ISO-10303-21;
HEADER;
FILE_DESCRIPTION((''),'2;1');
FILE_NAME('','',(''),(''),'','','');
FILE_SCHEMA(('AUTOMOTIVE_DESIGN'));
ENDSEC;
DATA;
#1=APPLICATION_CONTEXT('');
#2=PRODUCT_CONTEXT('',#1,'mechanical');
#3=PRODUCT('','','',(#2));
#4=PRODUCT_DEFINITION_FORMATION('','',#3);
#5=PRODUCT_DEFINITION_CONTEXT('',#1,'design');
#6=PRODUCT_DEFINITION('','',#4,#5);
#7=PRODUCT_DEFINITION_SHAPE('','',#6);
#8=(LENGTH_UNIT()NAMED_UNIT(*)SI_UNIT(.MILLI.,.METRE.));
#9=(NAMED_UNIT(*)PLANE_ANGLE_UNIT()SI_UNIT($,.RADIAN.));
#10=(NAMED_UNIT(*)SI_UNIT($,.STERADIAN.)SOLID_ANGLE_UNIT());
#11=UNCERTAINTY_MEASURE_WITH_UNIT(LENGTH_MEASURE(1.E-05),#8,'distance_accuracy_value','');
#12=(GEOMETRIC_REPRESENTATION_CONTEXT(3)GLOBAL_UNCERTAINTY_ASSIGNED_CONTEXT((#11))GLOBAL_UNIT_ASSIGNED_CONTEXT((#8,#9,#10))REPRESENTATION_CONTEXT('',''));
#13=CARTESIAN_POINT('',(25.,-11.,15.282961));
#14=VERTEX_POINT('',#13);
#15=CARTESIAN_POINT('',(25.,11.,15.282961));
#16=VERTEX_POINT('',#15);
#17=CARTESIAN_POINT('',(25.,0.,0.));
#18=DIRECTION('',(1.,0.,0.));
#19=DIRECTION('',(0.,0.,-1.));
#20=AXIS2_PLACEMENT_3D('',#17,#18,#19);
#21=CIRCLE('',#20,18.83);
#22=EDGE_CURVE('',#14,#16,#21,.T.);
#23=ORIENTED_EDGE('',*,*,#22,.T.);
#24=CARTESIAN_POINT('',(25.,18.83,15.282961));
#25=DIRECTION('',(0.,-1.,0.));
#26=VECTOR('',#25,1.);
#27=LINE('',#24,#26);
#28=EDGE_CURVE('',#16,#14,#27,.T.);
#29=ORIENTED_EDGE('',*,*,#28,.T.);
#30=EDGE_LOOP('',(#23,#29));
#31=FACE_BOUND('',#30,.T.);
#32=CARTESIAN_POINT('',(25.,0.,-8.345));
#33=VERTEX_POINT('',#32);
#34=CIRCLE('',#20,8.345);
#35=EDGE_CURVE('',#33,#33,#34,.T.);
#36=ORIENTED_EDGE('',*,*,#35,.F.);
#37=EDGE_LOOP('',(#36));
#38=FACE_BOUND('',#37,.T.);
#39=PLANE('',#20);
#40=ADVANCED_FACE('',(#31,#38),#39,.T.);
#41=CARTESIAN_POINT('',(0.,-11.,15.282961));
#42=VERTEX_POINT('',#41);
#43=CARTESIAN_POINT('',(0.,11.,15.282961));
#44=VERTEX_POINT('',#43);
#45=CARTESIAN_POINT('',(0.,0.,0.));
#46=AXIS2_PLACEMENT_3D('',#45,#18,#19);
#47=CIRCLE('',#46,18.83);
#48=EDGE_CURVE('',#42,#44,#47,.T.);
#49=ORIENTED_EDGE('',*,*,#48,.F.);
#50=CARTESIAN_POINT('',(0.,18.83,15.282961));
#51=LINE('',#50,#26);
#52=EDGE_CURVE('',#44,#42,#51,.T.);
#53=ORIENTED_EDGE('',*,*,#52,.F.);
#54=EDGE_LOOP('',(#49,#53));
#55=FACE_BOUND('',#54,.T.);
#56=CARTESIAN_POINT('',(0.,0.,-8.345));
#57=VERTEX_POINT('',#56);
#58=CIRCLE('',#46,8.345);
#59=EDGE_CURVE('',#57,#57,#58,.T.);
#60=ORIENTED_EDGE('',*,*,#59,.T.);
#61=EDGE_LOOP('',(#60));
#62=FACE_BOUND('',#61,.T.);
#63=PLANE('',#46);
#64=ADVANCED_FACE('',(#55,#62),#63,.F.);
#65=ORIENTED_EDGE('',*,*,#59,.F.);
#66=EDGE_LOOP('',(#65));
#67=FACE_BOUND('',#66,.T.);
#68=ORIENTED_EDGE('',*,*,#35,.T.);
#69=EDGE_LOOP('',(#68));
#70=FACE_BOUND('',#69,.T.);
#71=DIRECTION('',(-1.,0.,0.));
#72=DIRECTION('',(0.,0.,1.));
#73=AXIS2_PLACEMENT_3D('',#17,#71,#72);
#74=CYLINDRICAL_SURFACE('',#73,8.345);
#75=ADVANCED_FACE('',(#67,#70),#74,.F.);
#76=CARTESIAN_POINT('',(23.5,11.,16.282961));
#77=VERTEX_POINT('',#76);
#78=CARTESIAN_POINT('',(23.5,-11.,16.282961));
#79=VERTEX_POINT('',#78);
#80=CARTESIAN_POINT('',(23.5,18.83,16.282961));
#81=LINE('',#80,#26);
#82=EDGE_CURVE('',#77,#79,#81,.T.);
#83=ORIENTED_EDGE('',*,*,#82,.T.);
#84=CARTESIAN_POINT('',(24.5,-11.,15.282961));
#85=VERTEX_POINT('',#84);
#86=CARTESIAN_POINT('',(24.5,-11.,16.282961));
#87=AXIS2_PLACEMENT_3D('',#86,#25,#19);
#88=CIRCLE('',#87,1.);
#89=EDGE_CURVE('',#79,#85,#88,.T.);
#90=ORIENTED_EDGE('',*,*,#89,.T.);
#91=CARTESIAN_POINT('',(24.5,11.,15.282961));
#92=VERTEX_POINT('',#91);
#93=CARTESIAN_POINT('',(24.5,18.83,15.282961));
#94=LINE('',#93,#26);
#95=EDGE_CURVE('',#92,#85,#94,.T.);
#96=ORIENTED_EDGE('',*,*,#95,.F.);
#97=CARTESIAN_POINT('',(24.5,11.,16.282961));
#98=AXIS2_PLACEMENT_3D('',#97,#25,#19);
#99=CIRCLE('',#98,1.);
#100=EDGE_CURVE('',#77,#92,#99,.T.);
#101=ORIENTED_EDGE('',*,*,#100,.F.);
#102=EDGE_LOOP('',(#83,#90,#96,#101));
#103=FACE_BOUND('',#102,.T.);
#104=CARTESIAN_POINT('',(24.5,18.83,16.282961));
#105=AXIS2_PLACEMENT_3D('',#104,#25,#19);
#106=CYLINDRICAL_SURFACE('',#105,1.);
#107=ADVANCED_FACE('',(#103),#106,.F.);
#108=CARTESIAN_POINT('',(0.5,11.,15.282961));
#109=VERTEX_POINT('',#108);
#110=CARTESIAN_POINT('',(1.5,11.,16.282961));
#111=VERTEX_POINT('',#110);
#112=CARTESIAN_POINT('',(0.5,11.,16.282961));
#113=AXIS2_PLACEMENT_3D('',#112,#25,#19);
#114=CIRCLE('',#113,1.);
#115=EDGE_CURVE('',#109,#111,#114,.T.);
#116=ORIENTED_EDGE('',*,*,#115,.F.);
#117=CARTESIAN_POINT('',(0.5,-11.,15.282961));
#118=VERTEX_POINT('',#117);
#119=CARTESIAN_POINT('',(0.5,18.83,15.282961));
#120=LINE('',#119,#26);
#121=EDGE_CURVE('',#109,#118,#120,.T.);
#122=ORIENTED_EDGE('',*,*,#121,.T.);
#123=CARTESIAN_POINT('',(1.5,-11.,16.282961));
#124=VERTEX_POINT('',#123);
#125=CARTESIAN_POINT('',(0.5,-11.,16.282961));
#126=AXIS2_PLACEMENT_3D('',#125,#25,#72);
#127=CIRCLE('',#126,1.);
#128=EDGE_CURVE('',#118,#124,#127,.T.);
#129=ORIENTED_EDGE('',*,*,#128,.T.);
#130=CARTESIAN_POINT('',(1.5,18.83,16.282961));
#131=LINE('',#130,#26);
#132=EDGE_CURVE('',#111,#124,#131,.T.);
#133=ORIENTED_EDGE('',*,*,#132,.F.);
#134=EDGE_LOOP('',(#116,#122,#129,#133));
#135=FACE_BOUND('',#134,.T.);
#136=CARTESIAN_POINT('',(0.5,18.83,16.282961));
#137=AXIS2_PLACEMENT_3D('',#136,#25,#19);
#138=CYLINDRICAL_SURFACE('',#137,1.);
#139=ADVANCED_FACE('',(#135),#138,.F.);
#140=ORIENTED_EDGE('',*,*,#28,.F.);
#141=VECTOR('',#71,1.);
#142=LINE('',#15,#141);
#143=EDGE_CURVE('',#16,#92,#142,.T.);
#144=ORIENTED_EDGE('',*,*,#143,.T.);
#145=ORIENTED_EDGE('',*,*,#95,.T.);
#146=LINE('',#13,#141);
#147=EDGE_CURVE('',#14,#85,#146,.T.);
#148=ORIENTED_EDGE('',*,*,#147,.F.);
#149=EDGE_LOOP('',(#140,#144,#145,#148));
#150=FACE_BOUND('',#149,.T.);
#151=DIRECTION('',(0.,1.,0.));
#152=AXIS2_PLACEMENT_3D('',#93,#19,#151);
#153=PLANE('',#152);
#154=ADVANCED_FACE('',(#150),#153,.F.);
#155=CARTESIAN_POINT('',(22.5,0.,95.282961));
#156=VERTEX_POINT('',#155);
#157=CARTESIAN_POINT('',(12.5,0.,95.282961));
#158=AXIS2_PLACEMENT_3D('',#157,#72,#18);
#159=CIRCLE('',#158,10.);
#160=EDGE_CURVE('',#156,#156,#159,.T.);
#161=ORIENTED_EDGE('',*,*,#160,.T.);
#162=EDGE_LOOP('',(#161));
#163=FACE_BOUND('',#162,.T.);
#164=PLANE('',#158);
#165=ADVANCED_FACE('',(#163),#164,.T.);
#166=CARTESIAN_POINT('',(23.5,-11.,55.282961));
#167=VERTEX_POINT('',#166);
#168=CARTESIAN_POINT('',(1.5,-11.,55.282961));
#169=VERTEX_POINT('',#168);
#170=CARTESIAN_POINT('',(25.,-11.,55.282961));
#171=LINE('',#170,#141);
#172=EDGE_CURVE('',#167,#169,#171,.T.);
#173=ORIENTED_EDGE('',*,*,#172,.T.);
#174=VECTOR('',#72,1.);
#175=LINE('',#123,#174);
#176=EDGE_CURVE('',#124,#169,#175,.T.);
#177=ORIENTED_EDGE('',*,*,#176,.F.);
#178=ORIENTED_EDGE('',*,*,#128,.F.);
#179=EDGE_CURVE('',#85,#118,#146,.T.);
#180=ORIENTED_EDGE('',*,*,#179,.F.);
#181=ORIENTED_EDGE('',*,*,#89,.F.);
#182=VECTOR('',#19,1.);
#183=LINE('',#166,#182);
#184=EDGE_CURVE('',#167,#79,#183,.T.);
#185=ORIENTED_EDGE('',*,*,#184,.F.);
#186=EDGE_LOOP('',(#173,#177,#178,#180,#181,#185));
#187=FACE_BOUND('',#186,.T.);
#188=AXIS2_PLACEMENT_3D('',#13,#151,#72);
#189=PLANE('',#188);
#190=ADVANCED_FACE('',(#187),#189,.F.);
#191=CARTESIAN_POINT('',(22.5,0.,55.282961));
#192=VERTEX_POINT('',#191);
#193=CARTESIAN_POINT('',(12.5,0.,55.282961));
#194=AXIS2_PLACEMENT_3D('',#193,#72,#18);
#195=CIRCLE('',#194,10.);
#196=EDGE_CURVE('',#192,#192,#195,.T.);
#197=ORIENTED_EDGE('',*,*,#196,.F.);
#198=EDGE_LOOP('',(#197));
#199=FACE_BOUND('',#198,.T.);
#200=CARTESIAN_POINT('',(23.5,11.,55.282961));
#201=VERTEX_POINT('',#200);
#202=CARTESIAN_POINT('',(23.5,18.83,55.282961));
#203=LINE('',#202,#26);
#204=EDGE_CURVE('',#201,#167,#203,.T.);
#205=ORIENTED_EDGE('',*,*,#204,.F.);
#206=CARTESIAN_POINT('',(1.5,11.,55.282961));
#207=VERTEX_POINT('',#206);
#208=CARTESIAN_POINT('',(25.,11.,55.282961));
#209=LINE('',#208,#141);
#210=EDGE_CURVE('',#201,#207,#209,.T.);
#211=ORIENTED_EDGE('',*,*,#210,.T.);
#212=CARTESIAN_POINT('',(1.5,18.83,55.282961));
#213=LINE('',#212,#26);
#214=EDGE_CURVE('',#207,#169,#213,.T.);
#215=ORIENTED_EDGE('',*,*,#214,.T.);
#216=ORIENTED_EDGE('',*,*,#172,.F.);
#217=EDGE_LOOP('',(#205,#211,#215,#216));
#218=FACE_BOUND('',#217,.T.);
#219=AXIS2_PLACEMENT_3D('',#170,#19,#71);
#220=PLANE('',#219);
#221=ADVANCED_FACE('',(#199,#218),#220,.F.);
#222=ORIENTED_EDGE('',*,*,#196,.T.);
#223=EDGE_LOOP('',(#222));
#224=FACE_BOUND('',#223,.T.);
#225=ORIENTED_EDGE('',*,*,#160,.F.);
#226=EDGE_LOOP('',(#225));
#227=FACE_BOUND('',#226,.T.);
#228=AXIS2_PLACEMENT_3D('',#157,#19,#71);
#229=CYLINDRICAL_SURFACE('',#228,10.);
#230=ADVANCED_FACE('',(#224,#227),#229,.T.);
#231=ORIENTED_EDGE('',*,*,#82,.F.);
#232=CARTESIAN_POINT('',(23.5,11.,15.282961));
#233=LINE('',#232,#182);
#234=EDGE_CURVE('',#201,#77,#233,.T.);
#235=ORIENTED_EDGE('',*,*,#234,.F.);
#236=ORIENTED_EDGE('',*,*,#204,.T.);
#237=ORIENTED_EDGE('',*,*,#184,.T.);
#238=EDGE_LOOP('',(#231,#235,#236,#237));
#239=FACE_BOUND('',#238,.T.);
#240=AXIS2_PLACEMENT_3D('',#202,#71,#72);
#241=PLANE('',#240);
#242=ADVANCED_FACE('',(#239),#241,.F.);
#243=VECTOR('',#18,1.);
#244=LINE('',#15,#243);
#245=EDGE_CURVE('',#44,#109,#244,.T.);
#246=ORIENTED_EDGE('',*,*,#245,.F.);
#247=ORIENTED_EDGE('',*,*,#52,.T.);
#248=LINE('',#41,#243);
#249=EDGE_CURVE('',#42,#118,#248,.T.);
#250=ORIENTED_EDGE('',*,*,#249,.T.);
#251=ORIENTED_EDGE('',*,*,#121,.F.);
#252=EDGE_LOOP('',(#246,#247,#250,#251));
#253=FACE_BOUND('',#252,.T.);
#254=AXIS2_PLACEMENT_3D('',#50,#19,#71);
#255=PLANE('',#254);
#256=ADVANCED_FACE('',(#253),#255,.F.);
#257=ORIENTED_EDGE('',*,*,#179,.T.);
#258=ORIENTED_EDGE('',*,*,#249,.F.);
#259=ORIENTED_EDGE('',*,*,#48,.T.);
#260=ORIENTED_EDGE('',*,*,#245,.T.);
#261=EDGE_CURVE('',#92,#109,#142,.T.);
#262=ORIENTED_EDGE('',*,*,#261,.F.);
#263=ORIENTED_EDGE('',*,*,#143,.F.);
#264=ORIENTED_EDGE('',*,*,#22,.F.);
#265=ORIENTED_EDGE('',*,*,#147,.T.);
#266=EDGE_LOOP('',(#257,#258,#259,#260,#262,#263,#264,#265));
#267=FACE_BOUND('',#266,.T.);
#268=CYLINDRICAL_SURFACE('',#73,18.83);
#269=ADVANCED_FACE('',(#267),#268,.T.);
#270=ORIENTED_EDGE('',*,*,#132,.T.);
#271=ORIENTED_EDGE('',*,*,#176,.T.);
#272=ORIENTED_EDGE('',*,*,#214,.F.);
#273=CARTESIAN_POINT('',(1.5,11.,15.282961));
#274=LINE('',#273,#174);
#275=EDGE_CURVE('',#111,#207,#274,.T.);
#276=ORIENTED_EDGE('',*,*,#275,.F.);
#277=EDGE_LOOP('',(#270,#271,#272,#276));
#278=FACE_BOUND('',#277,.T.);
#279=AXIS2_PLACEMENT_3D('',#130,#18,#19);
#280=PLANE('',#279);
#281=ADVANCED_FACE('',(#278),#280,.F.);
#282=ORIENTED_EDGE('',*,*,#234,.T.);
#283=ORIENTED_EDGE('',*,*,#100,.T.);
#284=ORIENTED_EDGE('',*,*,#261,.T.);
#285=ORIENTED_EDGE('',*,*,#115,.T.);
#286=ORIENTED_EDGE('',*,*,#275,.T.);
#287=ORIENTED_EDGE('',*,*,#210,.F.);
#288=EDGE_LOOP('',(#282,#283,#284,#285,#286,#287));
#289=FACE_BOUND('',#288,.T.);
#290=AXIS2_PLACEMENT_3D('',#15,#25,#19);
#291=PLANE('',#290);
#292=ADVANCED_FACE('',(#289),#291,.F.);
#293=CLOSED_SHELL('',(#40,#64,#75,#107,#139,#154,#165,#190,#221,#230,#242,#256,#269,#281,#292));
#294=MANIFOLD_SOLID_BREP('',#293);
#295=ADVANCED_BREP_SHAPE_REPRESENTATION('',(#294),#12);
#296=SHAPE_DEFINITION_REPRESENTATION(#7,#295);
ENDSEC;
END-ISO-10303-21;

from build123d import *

# Parameters (mm, degrees)
SKETCH1_R           = 8.345
BOSS_EXTRUDE1_DEPTH = 25
CUT_EXTRUDE3_START  = -11
CUT_EXTRUDE3_DEPTH  = 22
SKETCH3_R           = 10
BOSS_EXTRUDE2_DEPTH = 40


# Read off the part's stored shape, not the designer's step: Cut-Extrude3
with BuildPart() as part:
    # Sketch1 → Boss-Extrude1 (new body)
    with BuildSketch(Plane(origin=(0, 0, 0), x_dir=(0, 0, -1), z_dir=(1, 0, 0))):
        with BuildLine():
            Line((-15.282961101, -11), (-55.282961101, -11))
            Line((-55.282961101, -11), (-55.282961101, 11))
            Line((-55.282961101, 11), (-15.282961101, 11))
            ThreePointArc((-15.282961101, 11), (18.83, 0), (-15.282961101, -11))
        make_face()
        Circle(SKETCH1_R, mode=Mode.SUBTRACT)
    extrude(amount=BOSS_EXTRUDE1_DEPTH)

    # Cut-Extrude3 outline → Cut-Extrude3 (cut)
    with BuildSketch(Plane(origin=(0, 0, 0), x_dir=(1, 0, 0), z_dir=(0, 1, 0)).offset(CUT_EXTRUDE3_START)):
        with BuildLine():
            Line((25, -55.282961101), (25, -15.282961101))
            Line((25, -15.282961101), (24.5, -15.282961101))
            ThreePointArc((24.5, -15.282961101), (23.792893218, -15.575854319), (23.5, -16.282961101))
            Line((23.5, -16.282961101), (23.5, -55.282961101))
            Line((23.5, -55.282961101), (25, -55.282961101))
        make_face()
        with BuildLine():
            Line((0, -55.282961101), (1.5, -55.282961101))
            Line((1.5, -55.282961101), (1.5, -16.282961101))
            ThreePointArc((1.5, -16.282961101), (1.207106782, -15.575854319), (0.5, -15.282961101))
            Line((0.5, -15.282961101), (0, -15.282961101))
            Line((0, -15.282961101), (0, -55.282961101))
        make_face()
    extrude(amount=CUT_EXTRUDE3_DEPTH, mode=Mode.SUBTRACT)

    # Sketch3 → Boss-Extrude2 (add)
    with BuildSketch(Plane.XY.offset(55.282961101)):
        with Locations((12.5, 0)):
            Circle(SKETCH3_R)
    extrude(amount=BOSS_EXTRUDE2_DEPTH)


solid = part.part
